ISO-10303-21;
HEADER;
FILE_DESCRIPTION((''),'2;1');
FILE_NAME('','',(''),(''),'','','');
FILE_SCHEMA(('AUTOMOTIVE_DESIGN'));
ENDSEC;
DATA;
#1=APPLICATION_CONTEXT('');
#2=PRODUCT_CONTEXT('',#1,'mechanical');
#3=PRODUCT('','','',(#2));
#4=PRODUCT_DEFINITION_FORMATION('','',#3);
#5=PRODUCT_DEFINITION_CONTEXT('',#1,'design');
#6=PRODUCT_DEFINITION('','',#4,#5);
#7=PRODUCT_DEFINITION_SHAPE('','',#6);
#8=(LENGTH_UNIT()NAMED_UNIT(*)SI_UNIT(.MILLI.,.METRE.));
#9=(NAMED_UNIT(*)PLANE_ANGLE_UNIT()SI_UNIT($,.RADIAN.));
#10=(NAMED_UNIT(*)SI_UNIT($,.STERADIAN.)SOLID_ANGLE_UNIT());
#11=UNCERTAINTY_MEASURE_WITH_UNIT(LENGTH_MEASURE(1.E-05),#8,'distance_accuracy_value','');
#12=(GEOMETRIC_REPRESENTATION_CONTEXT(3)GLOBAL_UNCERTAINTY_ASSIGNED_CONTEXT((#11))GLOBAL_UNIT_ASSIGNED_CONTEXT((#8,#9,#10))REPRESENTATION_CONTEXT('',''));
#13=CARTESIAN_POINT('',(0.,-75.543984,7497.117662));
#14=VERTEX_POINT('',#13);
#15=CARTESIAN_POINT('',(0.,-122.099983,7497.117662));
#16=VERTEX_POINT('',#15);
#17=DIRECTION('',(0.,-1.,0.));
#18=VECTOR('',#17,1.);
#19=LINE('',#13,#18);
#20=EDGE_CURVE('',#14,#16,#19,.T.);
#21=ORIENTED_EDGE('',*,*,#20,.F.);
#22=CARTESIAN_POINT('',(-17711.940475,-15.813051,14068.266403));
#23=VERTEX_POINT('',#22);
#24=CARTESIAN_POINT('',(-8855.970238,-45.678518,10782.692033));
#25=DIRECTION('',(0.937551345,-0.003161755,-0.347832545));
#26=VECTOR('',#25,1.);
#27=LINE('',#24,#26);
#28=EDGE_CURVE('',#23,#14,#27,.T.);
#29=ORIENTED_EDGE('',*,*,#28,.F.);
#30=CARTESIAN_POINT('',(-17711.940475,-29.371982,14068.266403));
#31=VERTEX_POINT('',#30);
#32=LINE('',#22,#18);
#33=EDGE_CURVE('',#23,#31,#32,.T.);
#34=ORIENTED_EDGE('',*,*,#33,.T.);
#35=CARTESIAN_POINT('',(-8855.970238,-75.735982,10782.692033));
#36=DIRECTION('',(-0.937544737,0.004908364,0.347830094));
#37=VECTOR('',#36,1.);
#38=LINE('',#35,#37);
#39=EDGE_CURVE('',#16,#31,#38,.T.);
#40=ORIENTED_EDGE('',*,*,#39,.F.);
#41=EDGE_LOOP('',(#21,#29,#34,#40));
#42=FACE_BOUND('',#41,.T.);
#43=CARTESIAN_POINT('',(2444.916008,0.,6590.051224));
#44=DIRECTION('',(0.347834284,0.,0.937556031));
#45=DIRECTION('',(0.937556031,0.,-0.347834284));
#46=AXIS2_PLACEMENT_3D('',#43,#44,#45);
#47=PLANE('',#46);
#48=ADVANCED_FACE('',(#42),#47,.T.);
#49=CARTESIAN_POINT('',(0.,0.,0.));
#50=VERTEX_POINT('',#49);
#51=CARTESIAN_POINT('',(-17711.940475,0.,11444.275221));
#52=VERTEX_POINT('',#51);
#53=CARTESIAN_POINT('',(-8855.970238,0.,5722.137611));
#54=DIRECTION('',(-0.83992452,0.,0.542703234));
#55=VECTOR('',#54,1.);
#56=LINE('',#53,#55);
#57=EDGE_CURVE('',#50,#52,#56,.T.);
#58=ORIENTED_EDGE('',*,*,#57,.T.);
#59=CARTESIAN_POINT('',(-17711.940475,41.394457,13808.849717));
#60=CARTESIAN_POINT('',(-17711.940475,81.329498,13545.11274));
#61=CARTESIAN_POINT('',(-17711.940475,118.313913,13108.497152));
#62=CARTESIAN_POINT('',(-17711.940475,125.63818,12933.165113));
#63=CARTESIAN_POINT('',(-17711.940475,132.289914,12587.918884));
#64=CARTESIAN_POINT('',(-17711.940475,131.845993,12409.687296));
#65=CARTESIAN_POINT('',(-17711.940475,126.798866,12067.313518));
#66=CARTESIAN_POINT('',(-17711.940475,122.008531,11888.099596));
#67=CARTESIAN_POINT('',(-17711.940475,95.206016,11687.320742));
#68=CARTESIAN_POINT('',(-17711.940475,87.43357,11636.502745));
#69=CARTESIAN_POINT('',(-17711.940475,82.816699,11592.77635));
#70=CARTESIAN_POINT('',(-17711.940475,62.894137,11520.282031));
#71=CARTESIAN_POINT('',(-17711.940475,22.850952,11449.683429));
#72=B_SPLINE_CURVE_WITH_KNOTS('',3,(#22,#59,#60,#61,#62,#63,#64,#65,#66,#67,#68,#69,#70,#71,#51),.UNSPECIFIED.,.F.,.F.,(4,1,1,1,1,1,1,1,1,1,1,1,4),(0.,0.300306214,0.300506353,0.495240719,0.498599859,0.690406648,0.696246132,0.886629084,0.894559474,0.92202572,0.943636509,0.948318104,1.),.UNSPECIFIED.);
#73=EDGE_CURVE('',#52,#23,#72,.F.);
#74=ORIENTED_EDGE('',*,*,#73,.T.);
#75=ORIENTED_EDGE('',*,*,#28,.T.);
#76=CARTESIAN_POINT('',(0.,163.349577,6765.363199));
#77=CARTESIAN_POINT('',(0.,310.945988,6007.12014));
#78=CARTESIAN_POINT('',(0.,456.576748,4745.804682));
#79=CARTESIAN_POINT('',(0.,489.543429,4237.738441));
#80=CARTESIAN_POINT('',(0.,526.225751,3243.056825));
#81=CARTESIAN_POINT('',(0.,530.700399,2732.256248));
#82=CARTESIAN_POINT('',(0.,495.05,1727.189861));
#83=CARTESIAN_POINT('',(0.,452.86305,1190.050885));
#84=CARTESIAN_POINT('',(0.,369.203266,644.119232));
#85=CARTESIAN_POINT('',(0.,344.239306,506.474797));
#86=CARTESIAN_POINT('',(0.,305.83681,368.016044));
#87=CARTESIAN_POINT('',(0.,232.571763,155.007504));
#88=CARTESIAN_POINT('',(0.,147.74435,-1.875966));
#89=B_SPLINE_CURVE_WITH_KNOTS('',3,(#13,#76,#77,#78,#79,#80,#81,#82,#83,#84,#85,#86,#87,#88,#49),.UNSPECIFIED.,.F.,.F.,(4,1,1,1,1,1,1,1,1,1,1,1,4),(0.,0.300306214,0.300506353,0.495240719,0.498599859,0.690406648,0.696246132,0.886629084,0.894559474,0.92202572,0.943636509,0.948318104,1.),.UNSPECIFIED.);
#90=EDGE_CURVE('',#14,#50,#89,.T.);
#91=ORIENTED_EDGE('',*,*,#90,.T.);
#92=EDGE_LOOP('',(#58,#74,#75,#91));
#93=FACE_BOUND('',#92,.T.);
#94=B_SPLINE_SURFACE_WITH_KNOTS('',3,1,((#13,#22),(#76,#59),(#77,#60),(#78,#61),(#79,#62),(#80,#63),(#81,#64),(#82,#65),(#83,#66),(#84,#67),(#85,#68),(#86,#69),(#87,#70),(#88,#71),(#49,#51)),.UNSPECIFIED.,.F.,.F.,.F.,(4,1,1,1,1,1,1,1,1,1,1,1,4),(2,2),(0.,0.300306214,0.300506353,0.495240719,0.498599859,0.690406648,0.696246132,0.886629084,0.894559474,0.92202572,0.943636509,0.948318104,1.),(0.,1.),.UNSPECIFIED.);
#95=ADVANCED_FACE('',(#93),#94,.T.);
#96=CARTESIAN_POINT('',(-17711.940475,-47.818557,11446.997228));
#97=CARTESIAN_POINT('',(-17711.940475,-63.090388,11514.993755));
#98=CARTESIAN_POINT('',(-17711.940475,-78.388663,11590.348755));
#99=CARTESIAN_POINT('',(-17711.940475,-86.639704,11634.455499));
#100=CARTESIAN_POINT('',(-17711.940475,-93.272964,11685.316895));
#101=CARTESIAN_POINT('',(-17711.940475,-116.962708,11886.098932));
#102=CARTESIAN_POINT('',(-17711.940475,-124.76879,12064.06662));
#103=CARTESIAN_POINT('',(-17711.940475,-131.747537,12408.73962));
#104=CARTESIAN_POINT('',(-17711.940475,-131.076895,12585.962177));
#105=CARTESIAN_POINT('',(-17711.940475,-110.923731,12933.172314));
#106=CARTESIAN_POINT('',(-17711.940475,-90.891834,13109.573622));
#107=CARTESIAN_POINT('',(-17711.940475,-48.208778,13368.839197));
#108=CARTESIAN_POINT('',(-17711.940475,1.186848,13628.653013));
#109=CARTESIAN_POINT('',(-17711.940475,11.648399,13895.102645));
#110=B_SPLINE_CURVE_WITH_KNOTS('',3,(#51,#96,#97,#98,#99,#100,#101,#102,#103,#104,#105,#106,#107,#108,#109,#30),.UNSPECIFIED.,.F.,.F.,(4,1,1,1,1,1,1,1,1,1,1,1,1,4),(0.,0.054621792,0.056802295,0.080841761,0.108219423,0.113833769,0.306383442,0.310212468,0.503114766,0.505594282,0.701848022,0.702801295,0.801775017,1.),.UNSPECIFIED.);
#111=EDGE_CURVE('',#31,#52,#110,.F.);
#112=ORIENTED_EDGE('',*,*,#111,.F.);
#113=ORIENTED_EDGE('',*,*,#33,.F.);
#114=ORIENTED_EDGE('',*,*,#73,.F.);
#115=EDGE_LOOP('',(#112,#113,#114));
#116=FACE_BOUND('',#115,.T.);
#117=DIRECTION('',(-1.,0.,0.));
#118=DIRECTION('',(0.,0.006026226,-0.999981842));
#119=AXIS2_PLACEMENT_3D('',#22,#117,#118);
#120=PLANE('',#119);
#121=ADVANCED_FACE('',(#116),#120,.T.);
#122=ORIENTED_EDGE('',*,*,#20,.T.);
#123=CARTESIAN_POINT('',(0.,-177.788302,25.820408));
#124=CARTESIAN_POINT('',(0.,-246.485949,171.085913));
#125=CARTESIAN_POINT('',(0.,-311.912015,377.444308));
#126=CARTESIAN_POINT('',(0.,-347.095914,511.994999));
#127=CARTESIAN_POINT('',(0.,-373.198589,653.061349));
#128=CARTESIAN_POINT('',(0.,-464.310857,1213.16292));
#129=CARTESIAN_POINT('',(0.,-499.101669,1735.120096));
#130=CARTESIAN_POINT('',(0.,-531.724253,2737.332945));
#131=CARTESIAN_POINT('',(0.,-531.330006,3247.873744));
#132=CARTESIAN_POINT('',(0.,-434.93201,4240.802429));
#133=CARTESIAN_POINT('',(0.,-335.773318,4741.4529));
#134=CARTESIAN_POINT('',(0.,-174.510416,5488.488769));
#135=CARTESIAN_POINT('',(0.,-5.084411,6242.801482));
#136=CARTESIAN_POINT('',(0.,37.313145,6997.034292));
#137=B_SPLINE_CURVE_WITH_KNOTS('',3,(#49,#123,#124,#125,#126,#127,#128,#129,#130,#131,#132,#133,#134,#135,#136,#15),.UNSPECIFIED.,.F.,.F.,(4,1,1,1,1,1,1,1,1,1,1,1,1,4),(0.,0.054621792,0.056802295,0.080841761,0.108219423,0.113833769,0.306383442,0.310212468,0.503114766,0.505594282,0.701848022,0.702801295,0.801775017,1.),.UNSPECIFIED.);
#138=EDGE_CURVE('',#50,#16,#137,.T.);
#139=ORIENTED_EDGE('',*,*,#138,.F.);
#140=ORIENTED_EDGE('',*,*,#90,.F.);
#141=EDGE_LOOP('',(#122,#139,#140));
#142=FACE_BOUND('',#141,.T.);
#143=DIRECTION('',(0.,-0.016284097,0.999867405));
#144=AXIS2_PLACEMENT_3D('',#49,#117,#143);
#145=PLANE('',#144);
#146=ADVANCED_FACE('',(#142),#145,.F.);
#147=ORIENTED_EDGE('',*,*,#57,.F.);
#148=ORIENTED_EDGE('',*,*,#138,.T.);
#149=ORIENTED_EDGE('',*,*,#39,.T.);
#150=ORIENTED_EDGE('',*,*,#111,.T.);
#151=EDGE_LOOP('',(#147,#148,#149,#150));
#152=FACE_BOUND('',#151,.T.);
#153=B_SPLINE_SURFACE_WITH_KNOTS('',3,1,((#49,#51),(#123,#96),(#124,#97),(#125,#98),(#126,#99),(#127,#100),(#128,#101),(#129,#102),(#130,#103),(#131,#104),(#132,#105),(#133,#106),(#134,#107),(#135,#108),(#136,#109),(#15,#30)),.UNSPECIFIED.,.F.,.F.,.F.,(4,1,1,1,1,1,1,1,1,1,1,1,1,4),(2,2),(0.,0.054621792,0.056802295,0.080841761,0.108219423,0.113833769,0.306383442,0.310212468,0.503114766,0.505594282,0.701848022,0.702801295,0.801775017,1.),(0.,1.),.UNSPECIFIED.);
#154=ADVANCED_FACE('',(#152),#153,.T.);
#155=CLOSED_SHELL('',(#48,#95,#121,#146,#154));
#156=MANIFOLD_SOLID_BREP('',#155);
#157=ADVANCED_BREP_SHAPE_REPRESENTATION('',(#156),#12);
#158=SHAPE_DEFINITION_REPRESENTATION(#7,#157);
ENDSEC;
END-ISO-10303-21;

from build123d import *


with BuildPart() as part:
    # Surface-Knit1: read off the stored shape, not the designer's step
    # Surface-Knit1: loft between two sections, ruled curve by curve
    surface_knit1_from = [
        Edge.make_bspline([(0, 0, 0), (0, -177.788302382, 25.820408102), (0, -246.485948711, 171.085912968), (0, -311.912015005, 377.444308178), (0, -347.095913963, 511.994999324), (0, -373.198588528, 653.061349224), (0, -464.310856576, 1213.162920256), (0, -499.101668503, 1735.120095555), (0, -531.724252638, 2737.332944749), (0, -531.330006107, 3247.873743507), (0, -434.932009966, 4240.802429489), (0, -335.77331796, 4741.452899859), (0, -174.510415983, 5488.488769263), (0, -5.08441115, 6242.801482391), (0, 37.313145435, 6997.034292399), (0, -122.099983024, 7497.117661908)], [0, 0, 0, 0, 0.054621792, 0.056802295, 0.080841761, 0.108219423, 0.113833769, 0.306383442, 0.310212468, 0.503114766, 0.505594282, 0.701848022, 0.702801295, 0.801775017, 1, 1, 1, 1], 3),
        Edge.make_bspline([(0, -75.543984205, 7497.117661908), (0, 163.349577431, 6765.363199445), (0, 310.94598773, 6007.120139596), (0, 456.576748472, 4745.804682195), (0, 489.543428573, 4237.738441047), (0, 526.225751025, 3243.056825214), (0, 530.700398686, 2732.256248216), (0, 495.049999949, 1727.189860939), (0, 452.863049778, 1190.050884663), (0, 369.203265791, 644.1192321), (0, 344.239306001, 506.474796897), (0, 305.836809673, 368.016044217), (0, 232.571763356, 155.007504072), (0, 147.744350316, -1.875966356), (0, 0, 0)], [0, 0, 0, 0, 0.300306214, 0.300506353, 0.495240719, 0.498599859, 0.690406648, 0.696246132, 0.886629084, 0.894559474, 0.92202572, 0.943636509, 0.948318104, 1, 1, 1, 1], 3),
        Edge.make_line((0, -75.543984205, 7497.117661908), (0, -122.099983024, 7497.117661908)),
    ]
    surface_knit1_to = [
        Edge.make_bspline([(-17711.940475464, 0, 11444.27522144), (-17711.940475464, -47.81855713, 11446.997227722), (-17711.940475464, -63.090388451, 11514.993754627), (-17711.940475464, -78.388663412, 11590.348755174), (-17711.940475464, -86.639703649, 11634.455499089), (-17711.940475464, -93.272964387, 11685.316894583), (-17711.940475464, -116.962708154, 11886.098931664), (-17711.940475464, -124.768790117, 12064.06661987), (-17711.940475464, -131.747537065, 12408.739619563), (-17711.940475464, -131.076895393, 12585.962177056), (-17711.940475464, -110.923731359, 12933.172314088), (-17711.940475464, -90.891834176, 13109.573622443), (-17711.940475464, -48.208778237, 13368.839197142), (-17711.940475464, 1.18684816, 13628.653013091), (-17711.940475464, 11.648398573, 13895.102644676), (-17711.940475464, -29.371981906, 14068.266403108)], [0, 0, 0, 0, 0.054621792, 0.056802295, 0.080841761, 0.108219423, 0.113833769, 0.306383442, 0.310212468, 0.503114766, 0.505594282, 0.701848022, 0.702801295, 0.801775017, 1, 1, 1, 1], 3),
        Edge.make_bspline([(-17711.940475464, -15.813051437, 14068.266403108), (-17711.940475464, 41.394457396, 13808.849717499), (-17711.940475464, 81.329497509, 13545.112740161), (-17711.940475464, 118.313912796, 13108.497152444), (-17711.940475464, 125.638180272, 12933.165113035), (-17711.940475464, 132.289914098, 12587.918884422), (-17711.940475464, 131.845992854, 12409.687296129), (-17711.940475464, 126.798865745, 12067.313518028), (-17711.940475464, 122.008531396, 11888.099596415), (-17711.940475464, 95.206016213, 11687.320742354), (-17711.940475464, 87.433569672, 11636.50274452), (-17711.940475464, 82.816699427, 11592.776350498), (-17711.940475464, 62.894137111, 11520.282031444), (-17711.940475464, 22.850952251, 11449.683428606), (-17711.940475464, 0, 11444.27522144)], [0, 0, 0, 0, 0.300306214, 0.300506353, 0.495240719, 0.498599859, 0.690406648, 0.696246132, 0.886629084, 0.894559474, 0.92202572, 0.943636509, 0.948318104, 1, 1, 1, 1], 3),
        Edge.make_line((-17711.940475464, -15.813051437, 14068.266403108), (-17711.940475464, -29.371981906, 14068.266403108)),
    ]
    surface_knit1 = Solid(Shell([*[Face.make_surface_from_curves(surface_knit1_from[k], surface_knit1_to[k]) for k in range(3)], Face(Wire(surface_knit1_from)), Face(Wire(surface_knit1_to))]))
    add(surface_knit1)


solid = part.part
